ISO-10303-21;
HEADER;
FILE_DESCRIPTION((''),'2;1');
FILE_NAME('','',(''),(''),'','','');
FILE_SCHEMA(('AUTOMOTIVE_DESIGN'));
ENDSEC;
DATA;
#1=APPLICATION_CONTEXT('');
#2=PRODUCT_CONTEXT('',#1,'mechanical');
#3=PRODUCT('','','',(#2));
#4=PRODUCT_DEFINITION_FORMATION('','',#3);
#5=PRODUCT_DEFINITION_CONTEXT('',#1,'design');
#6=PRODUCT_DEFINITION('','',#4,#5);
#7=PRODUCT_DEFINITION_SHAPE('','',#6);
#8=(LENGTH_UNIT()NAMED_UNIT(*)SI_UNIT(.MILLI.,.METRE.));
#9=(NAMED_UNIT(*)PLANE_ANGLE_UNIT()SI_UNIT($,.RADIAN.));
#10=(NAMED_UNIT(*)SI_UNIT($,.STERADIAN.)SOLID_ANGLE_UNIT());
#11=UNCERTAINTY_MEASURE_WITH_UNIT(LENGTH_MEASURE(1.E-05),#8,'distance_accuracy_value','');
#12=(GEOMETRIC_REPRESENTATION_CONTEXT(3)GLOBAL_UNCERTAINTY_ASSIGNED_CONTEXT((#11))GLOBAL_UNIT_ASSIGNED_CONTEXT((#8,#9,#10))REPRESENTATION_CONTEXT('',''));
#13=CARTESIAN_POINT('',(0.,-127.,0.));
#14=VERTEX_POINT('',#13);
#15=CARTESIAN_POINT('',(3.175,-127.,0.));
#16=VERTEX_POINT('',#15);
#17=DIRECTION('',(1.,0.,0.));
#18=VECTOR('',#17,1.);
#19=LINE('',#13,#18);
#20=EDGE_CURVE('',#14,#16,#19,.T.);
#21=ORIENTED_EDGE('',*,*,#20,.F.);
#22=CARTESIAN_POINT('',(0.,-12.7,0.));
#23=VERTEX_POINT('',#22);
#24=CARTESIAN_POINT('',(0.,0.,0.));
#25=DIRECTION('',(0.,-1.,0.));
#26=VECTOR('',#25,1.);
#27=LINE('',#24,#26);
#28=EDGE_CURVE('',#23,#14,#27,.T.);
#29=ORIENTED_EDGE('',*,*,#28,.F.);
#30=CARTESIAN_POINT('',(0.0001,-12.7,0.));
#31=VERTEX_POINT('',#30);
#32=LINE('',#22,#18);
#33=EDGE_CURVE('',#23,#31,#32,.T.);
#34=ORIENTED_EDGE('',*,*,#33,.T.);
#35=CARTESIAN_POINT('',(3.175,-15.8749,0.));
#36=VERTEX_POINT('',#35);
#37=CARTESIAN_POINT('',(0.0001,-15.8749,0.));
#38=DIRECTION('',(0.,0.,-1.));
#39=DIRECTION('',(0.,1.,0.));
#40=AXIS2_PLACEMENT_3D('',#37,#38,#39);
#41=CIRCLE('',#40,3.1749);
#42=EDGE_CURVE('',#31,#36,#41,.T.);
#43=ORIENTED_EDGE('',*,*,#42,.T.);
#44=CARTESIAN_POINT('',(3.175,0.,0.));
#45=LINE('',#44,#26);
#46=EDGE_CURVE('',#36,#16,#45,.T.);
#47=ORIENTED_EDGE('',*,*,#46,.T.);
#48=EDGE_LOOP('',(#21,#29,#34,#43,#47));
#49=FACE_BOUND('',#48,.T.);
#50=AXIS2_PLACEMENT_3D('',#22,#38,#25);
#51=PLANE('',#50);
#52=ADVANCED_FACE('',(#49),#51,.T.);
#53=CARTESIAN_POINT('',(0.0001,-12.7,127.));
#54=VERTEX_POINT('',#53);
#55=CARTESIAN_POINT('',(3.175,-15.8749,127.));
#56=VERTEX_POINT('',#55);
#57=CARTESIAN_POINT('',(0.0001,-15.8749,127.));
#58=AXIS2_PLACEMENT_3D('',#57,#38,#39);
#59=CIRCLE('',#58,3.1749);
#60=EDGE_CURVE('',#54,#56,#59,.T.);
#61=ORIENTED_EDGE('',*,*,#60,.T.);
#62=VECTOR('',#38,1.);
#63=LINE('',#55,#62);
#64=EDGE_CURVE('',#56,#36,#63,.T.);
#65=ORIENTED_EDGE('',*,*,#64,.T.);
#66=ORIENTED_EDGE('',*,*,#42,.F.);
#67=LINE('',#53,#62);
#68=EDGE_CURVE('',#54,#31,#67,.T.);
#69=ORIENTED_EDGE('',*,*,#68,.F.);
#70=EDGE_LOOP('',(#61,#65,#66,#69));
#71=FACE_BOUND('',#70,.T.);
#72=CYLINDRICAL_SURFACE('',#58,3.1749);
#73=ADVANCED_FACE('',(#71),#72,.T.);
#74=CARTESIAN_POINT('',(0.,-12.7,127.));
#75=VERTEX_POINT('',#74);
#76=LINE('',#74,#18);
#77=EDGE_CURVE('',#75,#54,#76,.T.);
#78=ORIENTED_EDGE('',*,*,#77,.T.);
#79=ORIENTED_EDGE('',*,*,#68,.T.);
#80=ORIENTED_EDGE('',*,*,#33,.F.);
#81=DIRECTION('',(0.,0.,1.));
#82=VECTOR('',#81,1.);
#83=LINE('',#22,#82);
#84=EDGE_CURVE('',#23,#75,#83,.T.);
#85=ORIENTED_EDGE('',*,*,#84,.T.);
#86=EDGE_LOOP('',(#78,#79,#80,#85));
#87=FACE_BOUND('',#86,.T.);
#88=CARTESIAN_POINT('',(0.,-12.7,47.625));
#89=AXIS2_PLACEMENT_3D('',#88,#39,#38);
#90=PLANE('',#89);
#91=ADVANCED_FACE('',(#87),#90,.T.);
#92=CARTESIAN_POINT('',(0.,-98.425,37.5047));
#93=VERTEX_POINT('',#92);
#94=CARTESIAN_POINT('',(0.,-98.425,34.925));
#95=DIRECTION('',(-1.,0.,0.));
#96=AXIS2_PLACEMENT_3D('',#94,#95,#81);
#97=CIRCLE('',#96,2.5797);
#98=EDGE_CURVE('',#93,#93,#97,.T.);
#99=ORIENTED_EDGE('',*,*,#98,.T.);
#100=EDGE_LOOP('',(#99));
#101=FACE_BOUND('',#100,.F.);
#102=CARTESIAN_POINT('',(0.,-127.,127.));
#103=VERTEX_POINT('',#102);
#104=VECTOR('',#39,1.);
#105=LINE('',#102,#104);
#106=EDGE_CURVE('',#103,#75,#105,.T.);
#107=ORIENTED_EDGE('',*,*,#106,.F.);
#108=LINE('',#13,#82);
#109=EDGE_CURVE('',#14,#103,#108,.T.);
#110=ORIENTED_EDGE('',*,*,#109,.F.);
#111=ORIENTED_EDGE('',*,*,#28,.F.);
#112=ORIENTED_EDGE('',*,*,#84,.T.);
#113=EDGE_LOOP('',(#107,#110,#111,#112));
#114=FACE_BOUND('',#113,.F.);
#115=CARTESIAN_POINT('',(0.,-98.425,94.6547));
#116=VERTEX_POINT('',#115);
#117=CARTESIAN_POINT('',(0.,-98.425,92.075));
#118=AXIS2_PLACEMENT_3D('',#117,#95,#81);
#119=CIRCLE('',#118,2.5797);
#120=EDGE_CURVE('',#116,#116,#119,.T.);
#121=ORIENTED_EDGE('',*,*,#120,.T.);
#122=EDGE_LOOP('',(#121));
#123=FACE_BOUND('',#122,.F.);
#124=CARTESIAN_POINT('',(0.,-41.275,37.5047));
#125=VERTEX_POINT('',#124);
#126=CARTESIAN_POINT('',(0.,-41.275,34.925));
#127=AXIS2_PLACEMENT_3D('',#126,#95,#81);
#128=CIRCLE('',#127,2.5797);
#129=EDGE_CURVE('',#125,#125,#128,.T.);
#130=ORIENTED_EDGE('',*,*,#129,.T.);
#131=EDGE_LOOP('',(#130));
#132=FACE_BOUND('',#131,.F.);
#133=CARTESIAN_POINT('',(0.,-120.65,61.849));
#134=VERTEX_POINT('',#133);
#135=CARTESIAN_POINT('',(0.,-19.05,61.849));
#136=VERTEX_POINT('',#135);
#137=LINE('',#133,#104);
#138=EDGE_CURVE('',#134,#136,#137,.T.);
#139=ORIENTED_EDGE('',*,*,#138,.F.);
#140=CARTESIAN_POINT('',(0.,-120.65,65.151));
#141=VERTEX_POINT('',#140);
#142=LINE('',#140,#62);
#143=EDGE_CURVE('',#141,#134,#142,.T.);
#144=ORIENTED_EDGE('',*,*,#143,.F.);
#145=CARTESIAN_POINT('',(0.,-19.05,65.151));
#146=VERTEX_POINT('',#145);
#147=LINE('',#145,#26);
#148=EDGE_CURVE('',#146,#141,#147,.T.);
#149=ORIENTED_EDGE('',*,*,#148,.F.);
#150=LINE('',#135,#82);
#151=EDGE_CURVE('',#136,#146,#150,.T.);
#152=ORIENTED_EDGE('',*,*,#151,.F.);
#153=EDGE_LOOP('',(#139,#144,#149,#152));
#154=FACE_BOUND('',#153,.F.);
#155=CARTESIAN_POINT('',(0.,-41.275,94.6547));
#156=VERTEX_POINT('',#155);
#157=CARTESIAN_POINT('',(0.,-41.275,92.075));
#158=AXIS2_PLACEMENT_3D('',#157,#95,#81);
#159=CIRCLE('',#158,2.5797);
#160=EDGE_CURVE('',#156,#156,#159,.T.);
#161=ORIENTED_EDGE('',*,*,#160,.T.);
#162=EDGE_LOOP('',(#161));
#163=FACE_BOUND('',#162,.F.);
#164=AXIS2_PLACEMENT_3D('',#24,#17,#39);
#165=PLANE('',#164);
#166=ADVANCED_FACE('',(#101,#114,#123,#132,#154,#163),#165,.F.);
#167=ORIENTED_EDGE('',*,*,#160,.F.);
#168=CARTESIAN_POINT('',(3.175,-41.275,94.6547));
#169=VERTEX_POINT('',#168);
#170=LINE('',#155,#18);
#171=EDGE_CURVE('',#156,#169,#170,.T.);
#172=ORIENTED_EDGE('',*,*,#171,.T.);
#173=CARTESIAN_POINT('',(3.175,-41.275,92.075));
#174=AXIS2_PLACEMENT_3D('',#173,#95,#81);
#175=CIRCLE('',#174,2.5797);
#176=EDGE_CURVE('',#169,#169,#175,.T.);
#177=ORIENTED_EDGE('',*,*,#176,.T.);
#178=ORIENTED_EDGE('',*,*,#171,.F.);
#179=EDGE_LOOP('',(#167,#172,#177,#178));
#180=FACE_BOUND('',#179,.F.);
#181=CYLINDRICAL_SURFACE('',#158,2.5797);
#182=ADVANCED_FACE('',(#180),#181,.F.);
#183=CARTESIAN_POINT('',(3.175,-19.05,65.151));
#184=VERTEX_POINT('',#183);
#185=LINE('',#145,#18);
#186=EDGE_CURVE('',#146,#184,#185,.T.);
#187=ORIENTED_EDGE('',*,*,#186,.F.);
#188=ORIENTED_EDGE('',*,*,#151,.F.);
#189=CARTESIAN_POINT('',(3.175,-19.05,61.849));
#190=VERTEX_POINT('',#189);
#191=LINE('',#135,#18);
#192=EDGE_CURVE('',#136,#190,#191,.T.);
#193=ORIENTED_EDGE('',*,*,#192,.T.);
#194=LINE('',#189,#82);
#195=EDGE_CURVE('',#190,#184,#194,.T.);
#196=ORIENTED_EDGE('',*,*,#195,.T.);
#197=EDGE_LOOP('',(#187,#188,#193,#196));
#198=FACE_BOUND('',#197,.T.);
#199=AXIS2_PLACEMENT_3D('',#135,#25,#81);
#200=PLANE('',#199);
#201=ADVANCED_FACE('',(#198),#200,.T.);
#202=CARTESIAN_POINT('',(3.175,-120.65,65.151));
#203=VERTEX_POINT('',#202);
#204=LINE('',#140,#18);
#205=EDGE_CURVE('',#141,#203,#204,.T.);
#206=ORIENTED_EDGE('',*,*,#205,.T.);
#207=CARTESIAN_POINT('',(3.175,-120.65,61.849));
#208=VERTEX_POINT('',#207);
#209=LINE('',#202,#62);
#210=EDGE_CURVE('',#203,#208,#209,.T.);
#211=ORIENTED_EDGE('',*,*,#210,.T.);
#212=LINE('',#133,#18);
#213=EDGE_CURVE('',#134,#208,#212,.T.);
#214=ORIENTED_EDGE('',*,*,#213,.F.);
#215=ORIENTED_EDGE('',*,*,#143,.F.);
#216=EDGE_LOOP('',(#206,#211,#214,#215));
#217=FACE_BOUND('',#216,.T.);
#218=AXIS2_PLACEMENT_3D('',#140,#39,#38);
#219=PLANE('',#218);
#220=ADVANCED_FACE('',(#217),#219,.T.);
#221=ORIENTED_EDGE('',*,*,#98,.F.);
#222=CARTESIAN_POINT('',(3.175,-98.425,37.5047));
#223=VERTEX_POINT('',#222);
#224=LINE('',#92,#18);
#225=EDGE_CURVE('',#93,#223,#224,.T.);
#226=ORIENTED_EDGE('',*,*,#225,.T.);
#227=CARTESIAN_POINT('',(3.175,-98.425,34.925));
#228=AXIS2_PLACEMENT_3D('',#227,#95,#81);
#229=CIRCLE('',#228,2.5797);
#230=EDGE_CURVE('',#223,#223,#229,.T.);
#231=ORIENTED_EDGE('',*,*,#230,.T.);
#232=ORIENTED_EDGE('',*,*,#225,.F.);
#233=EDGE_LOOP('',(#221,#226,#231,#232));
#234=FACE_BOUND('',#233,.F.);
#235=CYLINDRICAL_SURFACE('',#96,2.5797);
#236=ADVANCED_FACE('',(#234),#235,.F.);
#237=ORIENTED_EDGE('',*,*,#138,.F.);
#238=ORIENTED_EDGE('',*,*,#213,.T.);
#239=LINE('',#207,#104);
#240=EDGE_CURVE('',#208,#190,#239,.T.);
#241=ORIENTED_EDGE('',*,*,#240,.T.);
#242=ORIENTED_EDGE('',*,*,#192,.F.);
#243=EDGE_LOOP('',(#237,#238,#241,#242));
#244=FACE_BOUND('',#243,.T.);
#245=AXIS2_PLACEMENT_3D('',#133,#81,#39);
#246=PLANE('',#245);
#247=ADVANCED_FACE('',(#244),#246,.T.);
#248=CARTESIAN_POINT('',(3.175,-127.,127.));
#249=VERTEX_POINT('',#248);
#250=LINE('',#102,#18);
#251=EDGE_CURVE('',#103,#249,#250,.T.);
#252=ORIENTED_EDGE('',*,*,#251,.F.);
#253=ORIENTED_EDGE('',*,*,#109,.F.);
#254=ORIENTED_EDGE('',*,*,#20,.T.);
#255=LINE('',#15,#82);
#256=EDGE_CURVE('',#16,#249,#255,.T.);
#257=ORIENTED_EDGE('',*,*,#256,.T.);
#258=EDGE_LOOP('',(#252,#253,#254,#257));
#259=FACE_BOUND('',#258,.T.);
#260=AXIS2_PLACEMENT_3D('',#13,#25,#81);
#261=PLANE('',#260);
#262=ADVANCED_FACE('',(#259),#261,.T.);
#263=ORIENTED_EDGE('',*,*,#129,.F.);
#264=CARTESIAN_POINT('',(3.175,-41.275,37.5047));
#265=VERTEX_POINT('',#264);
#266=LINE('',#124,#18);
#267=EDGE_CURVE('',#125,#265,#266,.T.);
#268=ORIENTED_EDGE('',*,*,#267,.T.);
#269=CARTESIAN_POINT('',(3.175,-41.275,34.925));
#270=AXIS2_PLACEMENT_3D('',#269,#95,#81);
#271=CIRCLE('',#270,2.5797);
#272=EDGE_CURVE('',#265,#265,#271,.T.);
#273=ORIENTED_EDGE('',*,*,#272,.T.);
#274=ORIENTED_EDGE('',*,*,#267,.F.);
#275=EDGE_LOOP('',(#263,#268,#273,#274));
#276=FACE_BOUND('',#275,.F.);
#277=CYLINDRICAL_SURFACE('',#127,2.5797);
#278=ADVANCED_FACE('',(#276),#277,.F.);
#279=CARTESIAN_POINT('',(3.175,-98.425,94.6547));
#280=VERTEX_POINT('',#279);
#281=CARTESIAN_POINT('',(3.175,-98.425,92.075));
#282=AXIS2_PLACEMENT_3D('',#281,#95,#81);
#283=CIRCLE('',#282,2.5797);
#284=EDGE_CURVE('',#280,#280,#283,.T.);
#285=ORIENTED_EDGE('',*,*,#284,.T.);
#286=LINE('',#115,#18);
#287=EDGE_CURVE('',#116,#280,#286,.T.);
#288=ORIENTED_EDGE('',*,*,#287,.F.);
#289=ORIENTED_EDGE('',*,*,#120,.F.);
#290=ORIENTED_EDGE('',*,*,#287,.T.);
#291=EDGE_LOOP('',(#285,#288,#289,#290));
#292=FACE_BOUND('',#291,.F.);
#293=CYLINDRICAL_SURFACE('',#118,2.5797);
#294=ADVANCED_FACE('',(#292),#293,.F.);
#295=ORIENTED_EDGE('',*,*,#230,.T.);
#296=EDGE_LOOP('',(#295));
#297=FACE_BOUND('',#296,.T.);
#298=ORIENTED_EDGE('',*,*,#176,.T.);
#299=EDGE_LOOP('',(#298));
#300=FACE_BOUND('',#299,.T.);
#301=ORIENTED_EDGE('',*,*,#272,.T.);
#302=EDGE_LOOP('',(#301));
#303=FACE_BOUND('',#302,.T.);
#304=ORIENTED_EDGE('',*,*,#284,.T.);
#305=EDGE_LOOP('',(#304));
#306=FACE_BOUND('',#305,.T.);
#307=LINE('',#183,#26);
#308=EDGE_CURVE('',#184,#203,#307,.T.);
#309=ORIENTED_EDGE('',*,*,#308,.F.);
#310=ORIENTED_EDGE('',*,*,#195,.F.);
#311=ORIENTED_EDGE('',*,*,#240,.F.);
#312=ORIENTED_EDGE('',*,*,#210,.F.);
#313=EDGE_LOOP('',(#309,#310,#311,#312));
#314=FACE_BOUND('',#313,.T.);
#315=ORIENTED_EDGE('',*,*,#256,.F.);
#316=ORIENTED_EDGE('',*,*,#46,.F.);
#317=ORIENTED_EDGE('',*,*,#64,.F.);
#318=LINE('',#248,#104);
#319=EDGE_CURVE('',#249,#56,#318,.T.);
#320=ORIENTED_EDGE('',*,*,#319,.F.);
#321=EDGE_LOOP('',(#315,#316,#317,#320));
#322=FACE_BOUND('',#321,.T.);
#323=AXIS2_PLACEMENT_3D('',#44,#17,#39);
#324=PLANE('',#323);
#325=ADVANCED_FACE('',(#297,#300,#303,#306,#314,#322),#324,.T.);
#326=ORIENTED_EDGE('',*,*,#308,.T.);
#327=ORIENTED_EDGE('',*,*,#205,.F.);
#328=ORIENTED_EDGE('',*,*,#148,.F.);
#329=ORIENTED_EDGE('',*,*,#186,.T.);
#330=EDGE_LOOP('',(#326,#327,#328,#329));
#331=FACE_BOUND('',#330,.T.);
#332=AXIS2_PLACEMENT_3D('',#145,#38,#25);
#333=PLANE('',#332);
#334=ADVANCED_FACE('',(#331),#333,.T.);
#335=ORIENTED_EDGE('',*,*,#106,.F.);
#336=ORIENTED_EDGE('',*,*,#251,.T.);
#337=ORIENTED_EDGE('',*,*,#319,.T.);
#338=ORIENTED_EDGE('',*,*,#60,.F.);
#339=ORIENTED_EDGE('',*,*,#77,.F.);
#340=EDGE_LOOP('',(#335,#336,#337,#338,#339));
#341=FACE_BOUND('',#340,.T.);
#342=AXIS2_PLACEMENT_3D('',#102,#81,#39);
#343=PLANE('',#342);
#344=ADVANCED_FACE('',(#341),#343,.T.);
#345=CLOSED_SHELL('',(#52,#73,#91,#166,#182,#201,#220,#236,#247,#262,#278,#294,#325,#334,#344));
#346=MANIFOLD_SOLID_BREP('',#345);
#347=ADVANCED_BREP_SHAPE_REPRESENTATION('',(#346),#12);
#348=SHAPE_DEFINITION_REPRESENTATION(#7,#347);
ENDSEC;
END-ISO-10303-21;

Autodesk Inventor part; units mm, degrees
ref_plane "YZ Plane" through (0, 0, 0) normal (1, 0, 0) x (0, 1, 0)
ref_plane "XZ Plane" through (0, 0, 0) normal (0, 1, 0) x (-1, 0, 0)
ref_plane "XY Plane" through (0, 0, 0) normal (0, 0, 1) x (1, 0, 0)
sketch "Sketch1" plane through (0, 0, 0) normal (1, 0, 0) x (0, 1, 0)
  line L0 (0, 0) -> (-127, 0)
  line L1 (-127, 0) -> (-127, 127)
  line L2 (-127, 127) -> (0, 127)
  line L3 (0, 127) -> (0, 0)
  line L4 (-19.05, 65.151) -> (-120.65, 65.151)
  line L5 (-120.65, 65.151) -> (-120.65, 61.849)
  line L6 (-120.65, 61.849) -> (-19.05, 61.849)
  line L7 (-19.05, 61.849) -> (-19.05, 65.151)
  line L8 (0, 47.625) -> (-12.7, 47.625)
  line L9 (-12.7, 47.625) -> (-12.7, 79.375)
  line L10 (-12.7, 79.375) -> (0, 79.375)
  line L11 (0, 79.375) -> (0, 47.625)
  line L12 (-12.7, 47.625) -> (-12.7, 0)
  line L13 (-12.7, 79.375) -> (-12.7, 127)
  dimension "d0" = 127
  dimension "d1" = 127
  dimension "d2" = 6.35
  dimension "d4" = 3.302
  dimension "d5" = 61.849
  dimension "d25" = 12.7
  dimension "d26" = 31.75
  dimension "d27" = 47.625
  dimension "d28" = 6.35
extrude "Extrusion1" add sketch "Sketch1" along normal blind 3.175 contours L0 L1 L2 L13 L9 L12
sketch "Sketch3" plane through (0, 0, 0) normal (-1, 0, 0) x (0, 0, 1)
  circle A0 centre (34.925, -41.275) radius 2.5797
  line L0 (0, -127) -> (0, -12.7) projected
  line L1 (0, -12.7) -> (0, 0)
  line L2 (0, 0) -> (20.4302, 0)
  line L3 (20.4302, 0) -> (0, -12.7)
  circle A1 centre (34.925, -98.425) radius 2.5797
  circle A2 centre (92.075, -41.275) radius 2.5797
  circle A3 centre (92.075, -98.425) radius 2.5797
  line L4 (0, -12.7) -> (127, -12.7) projected
  dimension "d31" = 57.15
  dimension "d34" = 57.15
  dimension "d37" = 34.925
  dimension "d38" = 28.575
  dimension "d39" = 5.1594
extrude "Extrusion4" cut sketch "Sketch3" against normal through all contours A0 | A1 | A2 | A3
fillet "Fillet5" radius 3.175 1 edges at (3.175, -12.7, 63.5)
equation "\"d5\" = -0.5 * d4 + 0.5 * d1"
equation "\"d27\" = -0.5 * d26 + 0.5 * d1"
equation "\"d28\" = d2"
properties part number "Gripper plate"
